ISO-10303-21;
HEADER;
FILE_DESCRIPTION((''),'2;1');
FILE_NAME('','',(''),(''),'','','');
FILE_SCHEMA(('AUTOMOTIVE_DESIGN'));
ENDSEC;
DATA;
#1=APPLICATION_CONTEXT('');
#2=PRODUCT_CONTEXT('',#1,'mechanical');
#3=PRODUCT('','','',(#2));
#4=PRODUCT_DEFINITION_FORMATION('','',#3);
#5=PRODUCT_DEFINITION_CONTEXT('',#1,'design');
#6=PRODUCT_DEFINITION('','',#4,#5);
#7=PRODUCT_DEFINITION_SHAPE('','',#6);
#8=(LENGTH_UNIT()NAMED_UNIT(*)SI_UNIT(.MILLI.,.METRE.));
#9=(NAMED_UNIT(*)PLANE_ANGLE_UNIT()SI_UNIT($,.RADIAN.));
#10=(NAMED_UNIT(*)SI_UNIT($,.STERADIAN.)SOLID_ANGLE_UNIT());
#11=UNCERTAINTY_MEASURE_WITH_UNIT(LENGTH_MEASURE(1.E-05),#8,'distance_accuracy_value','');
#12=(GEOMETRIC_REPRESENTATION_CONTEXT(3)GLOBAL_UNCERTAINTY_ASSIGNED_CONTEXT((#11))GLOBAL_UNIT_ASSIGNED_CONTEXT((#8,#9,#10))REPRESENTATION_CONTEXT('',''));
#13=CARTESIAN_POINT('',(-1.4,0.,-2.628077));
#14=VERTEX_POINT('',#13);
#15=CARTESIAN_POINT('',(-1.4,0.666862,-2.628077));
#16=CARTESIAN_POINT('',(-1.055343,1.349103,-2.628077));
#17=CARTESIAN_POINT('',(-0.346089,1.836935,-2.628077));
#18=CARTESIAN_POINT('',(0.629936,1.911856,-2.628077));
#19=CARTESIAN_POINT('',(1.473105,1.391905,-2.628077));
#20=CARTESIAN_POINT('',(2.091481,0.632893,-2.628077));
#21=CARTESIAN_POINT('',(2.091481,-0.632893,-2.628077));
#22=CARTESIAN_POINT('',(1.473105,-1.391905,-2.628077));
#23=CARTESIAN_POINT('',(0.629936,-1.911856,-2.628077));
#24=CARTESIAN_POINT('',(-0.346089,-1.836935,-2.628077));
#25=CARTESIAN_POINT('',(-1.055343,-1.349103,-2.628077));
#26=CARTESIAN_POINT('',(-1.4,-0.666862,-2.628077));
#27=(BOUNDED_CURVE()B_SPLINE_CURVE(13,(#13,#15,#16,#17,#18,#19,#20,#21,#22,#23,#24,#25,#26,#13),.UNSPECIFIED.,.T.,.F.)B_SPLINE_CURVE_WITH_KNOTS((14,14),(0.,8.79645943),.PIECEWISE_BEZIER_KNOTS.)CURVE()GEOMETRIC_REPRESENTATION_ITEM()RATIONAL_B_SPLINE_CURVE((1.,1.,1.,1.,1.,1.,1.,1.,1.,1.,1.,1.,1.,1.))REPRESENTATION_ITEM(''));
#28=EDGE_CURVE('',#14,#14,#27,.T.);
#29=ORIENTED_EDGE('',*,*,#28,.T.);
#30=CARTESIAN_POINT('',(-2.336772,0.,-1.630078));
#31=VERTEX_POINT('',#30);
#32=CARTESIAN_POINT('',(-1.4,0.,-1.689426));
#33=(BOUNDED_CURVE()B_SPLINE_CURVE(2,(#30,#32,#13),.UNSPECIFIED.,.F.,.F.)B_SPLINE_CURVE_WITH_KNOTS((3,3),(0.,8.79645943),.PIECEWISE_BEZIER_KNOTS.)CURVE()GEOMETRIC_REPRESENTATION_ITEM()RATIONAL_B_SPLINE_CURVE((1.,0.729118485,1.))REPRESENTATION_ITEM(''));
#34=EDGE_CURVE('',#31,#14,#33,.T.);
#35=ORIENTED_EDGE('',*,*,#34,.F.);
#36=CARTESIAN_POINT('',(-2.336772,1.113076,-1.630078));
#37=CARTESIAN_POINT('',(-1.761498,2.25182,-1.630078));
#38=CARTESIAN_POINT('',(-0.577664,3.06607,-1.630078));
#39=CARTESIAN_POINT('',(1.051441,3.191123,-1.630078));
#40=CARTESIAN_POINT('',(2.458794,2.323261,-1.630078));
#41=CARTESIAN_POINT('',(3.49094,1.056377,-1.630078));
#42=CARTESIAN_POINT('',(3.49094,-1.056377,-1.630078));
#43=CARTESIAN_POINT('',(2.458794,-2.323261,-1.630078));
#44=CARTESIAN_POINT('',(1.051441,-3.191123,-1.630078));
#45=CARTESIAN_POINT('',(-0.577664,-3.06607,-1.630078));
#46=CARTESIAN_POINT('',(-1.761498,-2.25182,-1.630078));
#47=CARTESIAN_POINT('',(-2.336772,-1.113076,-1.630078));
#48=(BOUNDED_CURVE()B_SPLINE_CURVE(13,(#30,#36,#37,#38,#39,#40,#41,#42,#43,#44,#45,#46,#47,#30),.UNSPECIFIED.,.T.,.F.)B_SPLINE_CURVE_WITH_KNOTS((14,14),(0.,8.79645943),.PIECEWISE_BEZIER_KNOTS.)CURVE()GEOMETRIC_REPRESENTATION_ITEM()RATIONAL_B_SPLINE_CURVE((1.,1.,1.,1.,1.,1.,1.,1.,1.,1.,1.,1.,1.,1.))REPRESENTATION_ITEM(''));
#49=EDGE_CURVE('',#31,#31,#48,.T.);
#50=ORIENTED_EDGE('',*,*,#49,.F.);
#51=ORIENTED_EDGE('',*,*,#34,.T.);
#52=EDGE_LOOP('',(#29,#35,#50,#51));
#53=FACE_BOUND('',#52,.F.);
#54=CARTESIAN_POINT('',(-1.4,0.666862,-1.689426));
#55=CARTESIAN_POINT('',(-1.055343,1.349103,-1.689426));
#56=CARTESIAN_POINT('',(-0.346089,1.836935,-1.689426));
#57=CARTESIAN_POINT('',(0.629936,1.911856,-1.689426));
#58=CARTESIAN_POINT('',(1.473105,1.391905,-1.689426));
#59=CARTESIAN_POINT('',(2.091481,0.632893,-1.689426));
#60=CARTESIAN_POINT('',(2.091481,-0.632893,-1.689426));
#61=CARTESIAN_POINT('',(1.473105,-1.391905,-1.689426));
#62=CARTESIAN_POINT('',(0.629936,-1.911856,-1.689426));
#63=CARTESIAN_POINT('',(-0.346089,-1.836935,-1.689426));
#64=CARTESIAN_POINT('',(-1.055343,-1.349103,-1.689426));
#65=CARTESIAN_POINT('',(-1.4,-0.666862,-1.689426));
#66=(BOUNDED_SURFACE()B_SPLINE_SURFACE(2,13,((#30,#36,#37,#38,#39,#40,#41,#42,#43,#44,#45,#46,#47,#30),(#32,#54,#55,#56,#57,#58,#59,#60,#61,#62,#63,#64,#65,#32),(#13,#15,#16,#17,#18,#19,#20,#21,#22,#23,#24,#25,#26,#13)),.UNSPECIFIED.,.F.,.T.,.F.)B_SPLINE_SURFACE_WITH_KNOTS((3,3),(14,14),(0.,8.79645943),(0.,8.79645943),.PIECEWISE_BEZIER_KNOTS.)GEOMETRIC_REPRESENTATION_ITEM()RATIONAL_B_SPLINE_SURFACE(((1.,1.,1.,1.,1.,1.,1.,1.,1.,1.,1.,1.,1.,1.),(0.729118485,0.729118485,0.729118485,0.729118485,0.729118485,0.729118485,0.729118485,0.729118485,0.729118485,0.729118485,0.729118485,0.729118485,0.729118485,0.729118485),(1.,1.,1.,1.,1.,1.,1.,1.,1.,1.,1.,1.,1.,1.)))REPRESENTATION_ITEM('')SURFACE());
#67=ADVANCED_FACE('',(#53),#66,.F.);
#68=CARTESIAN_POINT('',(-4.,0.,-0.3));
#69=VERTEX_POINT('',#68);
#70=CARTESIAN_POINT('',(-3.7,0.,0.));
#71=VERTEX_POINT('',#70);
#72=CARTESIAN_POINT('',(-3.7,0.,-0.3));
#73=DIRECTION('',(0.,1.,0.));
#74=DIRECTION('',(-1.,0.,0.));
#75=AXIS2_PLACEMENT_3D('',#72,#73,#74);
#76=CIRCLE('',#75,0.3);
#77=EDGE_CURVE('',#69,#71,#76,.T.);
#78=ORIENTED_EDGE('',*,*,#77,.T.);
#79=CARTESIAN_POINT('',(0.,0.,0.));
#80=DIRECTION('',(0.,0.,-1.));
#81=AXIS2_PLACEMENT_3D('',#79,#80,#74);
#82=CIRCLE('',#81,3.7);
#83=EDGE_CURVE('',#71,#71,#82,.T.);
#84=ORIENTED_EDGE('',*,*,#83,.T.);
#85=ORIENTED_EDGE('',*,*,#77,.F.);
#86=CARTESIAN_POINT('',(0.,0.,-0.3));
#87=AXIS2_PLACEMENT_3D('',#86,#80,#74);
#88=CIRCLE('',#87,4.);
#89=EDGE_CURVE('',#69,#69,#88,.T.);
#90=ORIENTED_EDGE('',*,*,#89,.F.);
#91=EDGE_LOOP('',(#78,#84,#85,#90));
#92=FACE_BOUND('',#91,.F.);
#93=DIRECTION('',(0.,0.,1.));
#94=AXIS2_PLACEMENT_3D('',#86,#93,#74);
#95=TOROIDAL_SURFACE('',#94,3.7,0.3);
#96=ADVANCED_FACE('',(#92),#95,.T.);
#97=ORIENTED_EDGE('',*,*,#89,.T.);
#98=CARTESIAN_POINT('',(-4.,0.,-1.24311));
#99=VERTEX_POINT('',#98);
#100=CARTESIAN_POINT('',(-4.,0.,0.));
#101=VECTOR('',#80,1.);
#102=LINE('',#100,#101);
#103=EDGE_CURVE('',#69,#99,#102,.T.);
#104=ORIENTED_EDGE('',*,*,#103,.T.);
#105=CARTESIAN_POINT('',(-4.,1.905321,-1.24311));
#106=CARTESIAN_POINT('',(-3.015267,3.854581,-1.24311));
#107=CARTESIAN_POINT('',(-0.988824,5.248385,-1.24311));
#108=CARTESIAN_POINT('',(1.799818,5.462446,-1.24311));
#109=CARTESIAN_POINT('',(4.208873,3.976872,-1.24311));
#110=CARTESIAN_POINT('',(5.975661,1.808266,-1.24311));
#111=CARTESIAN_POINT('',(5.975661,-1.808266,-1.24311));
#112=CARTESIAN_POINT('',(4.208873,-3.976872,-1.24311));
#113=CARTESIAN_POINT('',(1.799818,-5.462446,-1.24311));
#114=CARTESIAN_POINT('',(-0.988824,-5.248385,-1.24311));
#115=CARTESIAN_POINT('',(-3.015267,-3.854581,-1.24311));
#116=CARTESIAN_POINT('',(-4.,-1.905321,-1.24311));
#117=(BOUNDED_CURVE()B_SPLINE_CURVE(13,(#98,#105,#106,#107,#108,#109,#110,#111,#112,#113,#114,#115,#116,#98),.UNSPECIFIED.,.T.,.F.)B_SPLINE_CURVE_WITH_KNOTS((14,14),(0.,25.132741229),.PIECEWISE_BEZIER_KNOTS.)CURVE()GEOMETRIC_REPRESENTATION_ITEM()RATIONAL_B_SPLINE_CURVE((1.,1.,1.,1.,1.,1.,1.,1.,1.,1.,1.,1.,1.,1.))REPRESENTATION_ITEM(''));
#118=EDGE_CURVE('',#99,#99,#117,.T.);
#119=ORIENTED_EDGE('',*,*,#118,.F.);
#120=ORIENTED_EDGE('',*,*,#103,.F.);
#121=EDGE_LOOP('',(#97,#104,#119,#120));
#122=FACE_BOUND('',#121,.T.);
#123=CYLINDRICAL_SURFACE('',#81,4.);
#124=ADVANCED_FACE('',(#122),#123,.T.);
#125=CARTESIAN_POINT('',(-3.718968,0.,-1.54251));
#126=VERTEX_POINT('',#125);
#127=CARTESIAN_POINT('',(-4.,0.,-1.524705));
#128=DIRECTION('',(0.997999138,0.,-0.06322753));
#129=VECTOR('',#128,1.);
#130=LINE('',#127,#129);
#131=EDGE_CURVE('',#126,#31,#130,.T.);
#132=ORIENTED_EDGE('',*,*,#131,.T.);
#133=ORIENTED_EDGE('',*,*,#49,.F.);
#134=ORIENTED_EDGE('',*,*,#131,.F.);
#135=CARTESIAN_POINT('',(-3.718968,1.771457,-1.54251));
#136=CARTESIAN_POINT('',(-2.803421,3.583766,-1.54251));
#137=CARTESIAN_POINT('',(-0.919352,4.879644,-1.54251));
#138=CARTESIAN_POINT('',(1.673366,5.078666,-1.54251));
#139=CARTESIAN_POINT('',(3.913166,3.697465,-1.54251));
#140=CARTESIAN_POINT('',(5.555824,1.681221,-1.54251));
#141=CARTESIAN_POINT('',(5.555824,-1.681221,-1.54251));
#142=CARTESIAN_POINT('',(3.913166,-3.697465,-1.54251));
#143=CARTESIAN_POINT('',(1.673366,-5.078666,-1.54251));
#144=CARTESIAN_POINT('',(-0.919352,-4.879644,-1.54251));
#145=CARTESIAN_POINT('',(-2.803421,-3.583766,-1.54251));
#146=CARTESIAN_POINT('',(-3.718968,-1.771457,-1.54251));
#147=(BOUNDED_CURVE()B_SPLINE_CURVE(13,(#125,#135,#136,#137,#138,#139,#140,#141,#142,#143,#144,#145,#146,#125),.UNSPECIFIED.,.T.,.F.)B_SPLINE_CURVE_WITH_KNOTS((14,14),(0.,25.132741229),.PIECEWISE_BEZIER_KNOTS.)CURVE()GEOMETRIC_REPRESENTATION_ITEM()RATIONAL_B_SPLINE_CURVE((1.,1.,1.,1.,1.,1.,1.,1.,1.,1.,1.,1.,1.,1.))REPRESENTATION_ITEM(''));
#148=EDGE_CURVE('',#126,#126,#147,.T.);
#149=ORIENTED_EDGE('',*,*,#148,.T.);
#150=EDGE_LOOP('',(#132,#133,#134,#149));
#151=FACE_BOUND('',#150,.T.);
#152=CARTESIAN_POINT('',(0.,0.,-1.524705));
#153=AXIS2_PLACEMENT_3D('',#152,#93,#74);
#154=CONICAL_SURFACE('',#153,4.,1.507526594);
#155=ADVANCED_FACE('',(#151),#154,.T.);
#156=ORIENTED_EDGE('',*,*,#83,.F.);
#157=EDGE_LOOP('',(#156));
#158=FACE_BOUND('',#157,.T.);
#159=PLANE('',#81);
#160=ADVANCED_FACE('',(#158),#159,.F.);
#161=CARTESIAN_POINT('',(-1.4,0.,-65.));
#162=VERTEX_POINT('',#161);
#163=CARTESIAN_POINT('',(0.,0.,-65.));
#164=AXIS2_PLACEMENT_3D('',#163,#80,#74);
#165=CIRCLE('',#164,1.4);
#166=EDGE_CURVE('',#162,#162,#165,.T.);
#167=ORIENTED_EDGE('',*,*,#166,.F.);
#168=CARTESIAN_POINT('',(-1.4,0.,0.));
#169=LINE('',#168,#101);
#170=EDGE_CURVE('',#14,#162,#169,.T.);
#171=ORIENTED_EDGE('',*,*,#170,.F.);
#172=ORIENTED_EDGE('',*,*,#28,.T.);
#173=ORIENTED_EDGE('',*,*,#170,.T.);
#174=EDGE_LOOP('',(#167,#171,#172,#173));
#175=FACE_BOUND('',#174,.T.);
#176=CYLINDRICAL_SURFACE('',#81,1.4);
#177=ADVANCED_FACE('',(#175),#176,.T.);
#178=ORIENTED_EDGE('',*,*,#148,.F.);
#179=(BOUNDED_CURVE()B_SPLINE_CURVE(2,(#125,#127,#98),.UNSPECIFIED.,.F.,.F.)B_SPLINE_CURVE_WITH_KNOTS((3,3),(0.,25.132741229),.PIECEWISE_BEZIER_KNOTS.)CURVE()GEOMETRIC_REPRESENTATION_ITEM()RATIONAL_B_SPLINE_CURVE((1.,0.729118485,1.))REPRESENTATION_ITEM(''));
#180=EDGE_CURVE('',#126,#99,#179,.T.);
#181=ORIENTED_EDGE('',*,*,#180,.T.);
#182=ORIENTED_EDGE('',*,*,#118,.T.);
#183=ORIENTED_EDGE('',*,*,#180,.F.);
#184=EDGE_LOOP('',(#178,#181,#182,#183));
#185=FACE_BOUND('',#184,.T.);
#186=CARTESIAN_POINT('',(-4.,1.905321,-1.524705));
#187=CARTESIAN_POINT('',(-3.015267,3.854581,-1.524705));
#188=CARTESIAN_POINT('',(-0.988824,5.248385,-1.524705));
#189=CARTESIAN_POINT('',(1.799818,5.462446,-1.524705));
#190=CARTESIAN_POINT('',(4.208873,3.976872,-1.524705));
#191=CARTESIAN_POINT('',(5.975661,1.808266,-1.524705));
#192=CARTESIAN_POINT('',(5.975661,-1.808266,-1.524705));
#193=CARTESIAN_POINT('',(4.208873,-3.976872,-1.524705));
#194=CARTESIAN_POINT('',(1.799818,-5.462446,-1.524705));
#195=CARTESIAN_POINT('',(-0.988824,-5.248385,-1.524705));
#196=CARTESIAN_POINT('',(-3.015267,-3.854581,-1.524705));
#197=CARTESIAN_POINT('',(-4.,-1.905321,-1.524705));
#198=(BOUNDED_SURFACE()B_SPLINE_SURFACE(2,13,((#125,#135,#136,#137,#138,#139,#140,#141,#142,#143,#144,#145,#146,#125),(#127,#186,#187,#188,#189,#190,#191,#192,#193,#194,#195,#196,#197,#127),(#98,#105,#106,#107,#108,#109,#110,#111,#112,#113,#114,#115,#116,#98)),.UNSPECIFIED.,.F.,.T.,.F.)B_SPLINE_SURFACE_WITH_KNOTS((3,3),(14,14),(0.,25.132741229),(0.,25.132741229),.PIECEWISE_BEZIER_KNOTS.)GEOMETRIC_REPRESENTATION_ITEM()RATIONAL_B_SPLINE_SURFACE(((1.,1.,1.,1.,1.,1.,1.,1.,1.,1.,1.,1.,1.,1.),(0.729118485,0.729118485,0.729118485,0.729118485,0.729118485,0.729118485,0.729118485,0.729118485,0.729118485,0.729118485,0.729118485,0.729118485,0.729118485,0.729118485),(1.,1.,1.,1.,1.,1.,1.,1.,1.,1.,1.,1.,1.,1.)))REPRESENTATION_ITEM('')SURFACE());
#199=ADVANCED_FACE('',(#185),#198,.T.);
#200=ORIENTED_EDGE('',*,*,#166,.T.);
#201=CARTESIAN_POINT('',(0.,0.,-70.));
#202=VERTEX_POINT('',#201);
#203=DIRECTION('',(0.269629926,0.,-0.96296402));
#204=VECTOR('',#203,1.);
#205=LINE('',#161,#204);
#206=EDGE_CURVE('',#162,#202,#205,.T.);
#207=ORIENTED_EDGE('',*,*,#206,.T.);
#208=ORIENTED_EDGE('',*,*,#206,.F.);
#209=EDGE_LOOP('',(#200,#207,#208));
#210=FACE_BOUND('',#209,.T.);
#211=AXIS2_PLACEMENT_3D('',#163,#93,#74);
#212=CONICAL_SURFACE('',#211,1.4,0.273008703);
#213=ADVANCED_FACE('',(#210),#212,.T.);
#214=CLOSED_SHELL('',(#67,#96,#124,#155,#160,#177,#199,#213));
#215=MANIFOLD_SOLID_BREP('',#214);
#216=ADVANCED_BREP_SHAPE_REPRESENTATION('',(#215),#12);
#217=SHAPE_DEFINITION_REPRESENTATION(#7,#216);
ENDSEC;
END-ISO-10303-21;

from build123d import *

# Parameters (mm, degrees)
F2_R = 1
F3_R = 0.3


# Not quite as in the source:
# - a feature names something its author has since deleted; it is built from what else it names


with BuildPart() as f1:
    # F0 (on Front) → F1 (revolve)
    with BuildSketch(Plane.XZ):
        Polygon((0, -70), (0, 0), (-1.4, 0), (-1.4, -1.6894261353), (-1.4, -65), align=None)
        Polygon((-1.4, -1.6894261353), (-1.4, 0), (-4, 0), (-4, -1.5247049741), align=None)
    revolve(axis=Axis((0, 0, -35), (0, 0, -1)))

    # F2
    f2_edges = [f1.edges().sort_by_distance(p)[0] for p in [
        (1.4, 0, -1.689426),
    ]]
    fillet(f2_edges, radius=F2_R)

    # F3
    f3_edges = [f1.edges().sort_by_distance(p)[0] for p in [
        (4, 0, 0),
        (4, 0, -1.524705),
    ]]
    fillet(f3_edges, radius=F3_R)


solid = f1.part
